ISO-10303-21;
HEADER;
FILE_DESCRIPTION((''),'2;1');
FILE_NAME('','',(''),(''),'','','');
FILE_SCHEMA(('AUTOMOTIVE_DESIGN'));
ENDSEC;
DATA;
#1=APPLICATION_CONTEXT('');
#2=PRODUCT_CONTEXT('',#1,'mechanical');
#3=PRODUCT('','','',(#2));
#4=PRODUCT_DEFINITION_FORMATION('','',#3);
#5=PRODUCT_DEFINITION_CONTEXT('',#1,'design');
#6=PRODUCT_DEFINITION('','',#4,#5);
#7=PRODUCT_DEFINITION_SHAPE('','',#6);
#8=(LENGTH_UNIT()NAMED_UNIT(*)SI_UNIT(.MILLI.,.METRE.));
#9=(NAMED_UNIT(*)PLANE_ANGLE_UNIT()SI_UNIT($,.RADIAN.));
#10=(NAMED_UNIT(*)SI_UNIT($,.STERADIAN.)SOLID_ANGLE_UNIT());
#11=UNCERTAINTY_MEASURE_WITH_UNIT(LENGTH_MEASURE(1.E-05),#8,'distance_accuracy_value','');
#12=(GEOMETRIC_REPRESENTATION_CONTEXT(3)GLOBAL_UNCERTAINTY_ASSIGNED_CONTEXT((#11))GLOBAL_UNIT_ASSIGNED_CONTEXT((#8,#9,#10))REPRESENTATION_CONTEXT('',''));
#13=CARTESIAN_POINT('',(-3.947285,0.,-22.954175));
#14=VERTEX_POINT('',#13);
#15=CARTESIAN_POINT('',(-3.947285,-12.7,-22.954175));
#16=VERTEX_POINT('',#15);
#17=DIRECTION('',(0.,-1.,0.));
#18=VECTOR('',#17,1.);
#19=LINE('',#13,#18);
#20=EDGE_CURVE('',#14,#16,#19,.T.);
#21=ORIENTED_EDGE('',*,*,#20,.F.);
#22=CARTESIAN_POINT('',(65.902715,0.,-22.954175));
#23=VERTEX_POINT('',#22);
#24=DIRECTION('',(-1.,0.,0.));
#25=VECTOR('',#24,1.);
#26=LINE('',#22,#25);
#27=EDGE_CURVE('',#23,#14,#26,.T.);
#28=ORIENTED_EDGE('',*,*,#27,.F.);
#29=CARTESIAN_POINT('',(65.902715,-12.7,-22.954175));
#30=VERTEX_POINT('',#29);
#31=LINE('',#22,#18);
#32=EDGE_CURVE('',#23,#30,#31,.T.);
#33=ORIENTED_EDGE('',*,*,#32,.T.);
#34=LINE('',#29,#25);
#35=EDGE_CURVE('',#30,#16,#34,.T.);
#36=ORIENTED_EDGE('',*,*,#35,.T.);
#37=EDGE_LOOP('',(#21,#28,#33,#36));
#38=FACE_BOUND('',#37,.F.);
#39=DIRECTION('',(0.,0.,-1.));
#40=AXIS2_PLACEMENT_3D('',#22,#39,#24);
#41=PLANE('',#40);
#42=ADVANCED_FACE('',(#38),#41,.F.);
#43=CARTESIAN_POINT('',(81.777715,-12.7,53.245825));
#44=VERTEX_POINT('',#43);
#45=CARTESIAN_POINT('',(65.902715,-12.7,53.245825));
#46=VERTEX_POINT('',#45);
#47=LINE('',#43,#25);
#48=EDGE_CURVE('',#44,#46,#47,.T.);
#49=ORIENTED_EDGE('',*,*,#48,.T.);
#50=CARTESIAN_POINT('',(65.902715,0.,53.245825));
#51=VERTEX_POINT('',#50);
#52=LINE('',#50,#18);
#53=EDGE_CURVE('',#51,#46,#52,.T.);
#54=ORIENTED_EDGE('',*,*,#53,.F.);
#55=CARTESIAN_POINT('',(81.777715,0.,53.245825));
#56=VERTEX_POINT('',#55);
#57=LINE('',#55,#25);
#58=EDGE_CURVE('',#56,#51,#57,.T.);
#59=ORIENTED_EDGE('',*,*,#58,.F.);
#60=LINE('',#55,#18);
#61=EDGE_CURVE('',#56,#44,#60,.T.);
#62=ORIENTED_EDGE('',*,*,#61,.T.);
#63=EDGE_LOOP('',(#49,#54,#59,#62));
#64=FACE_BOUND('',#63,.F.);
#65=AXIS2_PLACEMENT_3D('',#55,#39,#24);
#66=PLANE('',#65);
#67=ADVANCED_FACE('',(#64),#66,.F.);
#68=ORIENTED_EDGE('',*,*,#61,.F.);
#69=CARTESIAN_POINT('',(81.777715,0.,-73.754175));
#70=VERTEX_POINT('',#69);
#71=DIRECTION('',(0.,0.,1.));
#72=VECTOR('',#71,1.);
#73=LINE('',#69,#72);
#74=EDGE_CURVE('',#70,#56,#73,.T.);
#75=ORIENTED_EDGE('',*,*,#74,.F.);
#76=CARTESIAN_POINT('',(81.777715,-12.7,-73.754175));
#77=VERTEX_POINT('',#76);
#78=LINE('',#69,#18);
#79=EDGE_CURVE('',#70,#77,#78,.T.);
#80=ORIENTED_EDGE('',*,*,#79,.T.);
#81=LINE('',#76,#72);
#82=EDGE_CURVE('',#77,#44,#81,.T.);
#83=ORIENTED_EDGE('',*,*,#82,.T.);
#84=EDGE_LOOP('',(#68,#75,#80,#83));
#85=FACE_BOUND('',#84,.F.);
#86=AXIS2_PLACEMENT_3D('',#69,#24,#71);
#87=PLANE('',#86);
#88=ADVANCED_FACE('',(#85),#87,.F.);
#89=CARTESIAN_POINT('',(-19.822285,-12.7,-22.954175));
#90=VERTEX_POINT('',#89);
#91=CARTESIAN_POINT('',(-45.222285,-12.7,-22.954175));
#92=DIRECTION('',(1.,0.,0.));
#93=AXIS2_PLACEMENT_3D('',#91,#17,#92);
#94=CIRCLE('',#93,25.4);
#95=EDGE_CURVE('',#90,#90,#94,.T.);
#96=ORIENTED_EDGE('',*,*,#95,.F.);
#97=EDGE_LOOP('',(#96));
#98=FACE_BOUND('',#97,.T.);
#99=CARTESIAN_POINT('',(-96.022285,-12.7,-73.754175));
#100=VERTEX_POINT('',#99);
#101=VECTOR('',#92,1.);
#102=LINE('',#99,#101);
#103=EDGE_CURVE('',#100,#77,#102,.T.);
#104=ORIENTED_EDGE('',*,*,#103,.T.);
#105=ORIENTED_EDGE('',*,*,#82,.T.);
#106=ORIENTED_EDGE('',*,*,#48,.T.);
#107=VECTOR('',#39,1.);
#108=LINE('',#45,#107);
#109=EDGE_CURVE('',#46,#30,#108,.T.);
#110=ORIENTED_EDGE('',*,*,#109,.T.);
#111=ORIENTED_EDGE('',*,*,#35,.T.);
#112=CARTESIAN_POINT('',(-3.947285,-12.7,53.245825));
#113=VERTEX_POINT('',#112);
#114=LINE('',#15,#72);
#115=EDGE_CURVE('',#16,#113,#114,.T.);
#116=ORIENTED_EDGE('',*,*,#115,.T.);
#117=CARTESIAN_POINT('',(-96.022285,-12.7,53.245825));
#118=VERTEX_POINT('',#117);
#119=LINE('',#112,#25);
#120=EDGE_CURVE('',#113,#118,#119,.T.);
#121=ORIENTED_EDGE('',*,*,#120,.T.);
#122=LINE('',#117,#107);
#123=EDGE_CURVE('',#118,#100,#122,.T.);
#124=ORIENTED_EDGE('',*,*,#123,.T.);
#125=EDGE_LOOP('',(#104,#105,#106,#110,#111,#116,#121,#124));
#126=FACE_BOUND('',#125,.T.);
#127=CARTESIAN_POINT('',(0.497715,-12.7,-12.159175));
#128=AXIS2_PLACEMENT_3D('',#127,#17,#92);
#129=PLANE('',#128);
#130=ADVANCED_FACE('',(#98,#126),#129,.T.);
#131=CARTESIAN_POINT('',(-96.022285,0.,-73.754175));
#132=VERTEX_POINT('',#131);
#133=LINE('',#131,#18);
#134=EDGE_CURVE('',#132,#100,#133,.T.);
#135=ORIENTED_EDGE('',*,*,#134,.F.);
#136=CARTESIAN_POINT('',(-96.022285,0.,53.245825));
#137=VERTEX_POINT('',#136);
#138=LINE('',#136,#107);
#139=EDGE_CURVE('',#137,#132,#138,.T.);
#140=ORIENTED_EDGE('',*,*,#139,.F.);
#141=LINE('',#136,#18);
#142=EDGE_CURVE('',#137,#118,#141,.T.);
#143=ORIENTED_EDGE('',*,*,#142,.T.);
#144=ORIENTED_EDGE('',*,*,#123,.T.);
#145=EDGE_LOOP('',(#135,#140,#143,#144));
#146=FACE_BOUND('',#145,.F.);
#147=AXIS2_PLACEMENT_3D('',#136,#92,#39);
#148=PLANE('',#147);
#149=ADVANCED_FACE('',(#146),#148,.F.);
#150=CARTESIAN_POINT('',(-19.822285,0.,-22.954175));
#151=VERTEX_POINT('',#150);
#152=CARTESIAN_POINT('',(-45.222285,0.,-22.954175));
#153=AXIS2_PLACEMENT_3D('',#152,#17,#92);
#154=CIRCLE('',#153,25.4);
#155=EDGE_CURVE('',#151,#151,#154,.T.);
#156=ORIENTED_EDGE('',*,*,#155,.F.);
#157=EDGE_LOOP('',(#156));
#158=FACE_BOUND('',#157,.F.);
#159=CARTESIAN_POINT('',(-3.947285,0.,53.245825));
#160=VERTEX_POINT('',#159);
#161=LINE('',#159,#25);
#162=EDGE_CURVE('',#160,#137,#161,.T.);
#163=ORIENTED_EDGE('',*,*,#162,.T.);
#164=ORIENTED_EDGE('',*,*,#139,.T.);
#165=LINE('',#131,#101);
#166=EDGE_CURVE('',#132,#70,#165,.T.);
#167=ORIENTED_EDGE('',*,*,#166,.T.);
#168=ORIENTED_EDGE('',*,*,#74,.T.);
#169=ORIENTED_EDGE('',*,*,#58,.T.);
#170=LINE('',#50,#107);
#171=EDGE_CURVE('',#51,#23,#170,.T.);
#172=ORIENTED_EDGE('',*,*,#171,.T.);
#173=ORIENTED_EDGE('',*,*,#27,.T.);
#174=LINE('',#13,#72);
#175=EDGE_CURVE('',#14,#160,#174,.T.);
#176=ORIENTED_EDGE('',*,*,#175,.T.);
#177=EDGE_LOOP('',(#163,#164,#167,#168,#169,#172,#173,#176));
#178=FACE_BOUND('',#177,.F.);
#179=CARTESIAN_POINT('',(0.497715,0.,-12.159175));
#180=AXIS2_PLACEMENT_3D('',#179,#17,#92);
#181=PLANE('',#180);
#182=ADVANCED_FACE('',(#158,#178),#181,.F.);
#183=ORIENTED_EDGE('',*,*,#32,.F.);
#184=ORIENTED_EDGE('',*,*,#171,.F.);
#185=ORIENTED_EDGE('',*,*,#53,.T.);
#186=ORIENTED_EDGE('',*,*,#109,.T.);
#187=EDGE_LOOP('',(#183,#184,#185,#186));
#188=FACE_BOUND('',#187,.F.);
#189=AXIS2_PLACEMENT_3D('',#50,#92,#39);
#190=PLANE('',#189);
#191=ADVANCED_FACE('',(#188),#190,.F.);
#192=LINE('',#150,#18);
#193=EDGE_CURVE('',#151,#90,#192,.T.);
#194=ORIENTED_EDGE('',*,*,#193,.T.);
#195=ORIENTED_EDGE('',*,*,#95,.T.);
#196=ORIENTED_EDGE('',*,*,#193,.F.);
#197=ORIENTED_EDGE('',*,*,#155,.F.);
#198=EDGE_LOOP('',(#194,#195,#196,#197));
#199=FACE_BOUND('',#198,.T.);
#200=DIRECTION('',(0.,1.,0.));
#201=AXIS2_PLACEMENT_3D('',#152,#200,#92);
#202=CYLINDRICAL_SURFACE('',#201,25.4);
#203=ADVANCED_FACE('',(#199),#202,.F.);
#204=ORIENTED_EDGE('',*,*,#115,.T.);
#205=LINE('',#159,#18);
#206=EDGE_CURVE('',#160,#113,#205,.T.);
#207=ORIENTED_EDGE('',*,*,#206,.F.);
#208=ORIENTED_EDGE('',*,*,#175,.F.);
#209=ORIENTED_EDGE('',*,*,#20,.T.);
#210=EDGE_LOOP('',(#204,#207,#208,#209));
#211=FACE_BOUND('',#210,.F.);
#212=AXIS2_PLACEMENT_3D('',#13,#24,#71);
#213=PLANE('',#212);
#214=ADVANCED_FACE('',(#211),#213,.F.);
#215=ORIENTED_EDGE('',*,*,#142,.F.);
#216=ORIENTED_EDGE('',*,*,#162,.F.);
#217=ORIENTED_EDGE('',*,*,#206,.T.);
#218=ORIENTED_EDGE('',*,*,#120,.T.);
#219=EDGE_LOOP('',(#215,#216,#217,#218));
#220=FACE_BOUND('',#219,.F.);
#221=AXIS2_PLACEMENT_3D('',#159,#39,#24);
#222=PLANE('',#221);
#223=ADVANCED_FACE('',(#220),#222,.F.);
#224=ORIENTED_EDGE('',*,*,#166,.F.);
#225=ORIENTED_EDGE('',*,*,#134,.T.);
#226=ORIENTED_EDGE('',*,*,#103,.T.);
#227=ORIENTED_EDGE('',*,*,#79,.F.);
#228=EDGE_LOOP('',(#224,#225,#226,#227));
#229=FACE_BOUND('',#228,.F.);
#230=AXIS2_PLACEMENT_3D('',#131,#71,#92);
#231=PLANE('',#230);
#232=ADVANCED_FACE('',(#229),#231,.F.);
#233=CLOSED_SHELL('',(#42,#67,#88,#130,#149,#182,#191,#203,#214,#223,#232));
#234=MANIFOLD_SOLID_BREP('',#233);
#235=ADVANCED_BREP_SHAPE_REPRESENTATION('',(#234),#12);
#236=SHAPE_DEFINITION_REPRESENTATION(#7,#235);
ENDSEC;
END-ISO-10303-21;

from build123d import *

# Parameters (mm, degrees)
F0_R     = 25.4
F1_DEPTH = 12.7


# Not quite as in the source:
# - a length typed as a fraction of an inch, garbled in the dataset ("3 / 203.2 mm" for 3/8 in), is restored


with BuildPart() as f1:
    # F0 (on Front) → F1 (new body)
    with BuildSketch(Plane.XZ):
        Polygon((-3.9472851508, 53.245825498), (-96.0222851508, 53.245825498), (-96.0222851508, -73.754174502), (81.7777148492, -73.754174502), (81.7777148492, 53.245825498), (65.9027148492, 53.245825498), (65.9027148492, -22.954174502), (-3.9472851508, -22.954174502), align=None)
        with Locations((-45.2222851508, -22.954174502)):
            Circle(F0_R, mode=Mode.SUBTRACT)
    extrude(amount=F1_DEPTH)


solid = f1.part
